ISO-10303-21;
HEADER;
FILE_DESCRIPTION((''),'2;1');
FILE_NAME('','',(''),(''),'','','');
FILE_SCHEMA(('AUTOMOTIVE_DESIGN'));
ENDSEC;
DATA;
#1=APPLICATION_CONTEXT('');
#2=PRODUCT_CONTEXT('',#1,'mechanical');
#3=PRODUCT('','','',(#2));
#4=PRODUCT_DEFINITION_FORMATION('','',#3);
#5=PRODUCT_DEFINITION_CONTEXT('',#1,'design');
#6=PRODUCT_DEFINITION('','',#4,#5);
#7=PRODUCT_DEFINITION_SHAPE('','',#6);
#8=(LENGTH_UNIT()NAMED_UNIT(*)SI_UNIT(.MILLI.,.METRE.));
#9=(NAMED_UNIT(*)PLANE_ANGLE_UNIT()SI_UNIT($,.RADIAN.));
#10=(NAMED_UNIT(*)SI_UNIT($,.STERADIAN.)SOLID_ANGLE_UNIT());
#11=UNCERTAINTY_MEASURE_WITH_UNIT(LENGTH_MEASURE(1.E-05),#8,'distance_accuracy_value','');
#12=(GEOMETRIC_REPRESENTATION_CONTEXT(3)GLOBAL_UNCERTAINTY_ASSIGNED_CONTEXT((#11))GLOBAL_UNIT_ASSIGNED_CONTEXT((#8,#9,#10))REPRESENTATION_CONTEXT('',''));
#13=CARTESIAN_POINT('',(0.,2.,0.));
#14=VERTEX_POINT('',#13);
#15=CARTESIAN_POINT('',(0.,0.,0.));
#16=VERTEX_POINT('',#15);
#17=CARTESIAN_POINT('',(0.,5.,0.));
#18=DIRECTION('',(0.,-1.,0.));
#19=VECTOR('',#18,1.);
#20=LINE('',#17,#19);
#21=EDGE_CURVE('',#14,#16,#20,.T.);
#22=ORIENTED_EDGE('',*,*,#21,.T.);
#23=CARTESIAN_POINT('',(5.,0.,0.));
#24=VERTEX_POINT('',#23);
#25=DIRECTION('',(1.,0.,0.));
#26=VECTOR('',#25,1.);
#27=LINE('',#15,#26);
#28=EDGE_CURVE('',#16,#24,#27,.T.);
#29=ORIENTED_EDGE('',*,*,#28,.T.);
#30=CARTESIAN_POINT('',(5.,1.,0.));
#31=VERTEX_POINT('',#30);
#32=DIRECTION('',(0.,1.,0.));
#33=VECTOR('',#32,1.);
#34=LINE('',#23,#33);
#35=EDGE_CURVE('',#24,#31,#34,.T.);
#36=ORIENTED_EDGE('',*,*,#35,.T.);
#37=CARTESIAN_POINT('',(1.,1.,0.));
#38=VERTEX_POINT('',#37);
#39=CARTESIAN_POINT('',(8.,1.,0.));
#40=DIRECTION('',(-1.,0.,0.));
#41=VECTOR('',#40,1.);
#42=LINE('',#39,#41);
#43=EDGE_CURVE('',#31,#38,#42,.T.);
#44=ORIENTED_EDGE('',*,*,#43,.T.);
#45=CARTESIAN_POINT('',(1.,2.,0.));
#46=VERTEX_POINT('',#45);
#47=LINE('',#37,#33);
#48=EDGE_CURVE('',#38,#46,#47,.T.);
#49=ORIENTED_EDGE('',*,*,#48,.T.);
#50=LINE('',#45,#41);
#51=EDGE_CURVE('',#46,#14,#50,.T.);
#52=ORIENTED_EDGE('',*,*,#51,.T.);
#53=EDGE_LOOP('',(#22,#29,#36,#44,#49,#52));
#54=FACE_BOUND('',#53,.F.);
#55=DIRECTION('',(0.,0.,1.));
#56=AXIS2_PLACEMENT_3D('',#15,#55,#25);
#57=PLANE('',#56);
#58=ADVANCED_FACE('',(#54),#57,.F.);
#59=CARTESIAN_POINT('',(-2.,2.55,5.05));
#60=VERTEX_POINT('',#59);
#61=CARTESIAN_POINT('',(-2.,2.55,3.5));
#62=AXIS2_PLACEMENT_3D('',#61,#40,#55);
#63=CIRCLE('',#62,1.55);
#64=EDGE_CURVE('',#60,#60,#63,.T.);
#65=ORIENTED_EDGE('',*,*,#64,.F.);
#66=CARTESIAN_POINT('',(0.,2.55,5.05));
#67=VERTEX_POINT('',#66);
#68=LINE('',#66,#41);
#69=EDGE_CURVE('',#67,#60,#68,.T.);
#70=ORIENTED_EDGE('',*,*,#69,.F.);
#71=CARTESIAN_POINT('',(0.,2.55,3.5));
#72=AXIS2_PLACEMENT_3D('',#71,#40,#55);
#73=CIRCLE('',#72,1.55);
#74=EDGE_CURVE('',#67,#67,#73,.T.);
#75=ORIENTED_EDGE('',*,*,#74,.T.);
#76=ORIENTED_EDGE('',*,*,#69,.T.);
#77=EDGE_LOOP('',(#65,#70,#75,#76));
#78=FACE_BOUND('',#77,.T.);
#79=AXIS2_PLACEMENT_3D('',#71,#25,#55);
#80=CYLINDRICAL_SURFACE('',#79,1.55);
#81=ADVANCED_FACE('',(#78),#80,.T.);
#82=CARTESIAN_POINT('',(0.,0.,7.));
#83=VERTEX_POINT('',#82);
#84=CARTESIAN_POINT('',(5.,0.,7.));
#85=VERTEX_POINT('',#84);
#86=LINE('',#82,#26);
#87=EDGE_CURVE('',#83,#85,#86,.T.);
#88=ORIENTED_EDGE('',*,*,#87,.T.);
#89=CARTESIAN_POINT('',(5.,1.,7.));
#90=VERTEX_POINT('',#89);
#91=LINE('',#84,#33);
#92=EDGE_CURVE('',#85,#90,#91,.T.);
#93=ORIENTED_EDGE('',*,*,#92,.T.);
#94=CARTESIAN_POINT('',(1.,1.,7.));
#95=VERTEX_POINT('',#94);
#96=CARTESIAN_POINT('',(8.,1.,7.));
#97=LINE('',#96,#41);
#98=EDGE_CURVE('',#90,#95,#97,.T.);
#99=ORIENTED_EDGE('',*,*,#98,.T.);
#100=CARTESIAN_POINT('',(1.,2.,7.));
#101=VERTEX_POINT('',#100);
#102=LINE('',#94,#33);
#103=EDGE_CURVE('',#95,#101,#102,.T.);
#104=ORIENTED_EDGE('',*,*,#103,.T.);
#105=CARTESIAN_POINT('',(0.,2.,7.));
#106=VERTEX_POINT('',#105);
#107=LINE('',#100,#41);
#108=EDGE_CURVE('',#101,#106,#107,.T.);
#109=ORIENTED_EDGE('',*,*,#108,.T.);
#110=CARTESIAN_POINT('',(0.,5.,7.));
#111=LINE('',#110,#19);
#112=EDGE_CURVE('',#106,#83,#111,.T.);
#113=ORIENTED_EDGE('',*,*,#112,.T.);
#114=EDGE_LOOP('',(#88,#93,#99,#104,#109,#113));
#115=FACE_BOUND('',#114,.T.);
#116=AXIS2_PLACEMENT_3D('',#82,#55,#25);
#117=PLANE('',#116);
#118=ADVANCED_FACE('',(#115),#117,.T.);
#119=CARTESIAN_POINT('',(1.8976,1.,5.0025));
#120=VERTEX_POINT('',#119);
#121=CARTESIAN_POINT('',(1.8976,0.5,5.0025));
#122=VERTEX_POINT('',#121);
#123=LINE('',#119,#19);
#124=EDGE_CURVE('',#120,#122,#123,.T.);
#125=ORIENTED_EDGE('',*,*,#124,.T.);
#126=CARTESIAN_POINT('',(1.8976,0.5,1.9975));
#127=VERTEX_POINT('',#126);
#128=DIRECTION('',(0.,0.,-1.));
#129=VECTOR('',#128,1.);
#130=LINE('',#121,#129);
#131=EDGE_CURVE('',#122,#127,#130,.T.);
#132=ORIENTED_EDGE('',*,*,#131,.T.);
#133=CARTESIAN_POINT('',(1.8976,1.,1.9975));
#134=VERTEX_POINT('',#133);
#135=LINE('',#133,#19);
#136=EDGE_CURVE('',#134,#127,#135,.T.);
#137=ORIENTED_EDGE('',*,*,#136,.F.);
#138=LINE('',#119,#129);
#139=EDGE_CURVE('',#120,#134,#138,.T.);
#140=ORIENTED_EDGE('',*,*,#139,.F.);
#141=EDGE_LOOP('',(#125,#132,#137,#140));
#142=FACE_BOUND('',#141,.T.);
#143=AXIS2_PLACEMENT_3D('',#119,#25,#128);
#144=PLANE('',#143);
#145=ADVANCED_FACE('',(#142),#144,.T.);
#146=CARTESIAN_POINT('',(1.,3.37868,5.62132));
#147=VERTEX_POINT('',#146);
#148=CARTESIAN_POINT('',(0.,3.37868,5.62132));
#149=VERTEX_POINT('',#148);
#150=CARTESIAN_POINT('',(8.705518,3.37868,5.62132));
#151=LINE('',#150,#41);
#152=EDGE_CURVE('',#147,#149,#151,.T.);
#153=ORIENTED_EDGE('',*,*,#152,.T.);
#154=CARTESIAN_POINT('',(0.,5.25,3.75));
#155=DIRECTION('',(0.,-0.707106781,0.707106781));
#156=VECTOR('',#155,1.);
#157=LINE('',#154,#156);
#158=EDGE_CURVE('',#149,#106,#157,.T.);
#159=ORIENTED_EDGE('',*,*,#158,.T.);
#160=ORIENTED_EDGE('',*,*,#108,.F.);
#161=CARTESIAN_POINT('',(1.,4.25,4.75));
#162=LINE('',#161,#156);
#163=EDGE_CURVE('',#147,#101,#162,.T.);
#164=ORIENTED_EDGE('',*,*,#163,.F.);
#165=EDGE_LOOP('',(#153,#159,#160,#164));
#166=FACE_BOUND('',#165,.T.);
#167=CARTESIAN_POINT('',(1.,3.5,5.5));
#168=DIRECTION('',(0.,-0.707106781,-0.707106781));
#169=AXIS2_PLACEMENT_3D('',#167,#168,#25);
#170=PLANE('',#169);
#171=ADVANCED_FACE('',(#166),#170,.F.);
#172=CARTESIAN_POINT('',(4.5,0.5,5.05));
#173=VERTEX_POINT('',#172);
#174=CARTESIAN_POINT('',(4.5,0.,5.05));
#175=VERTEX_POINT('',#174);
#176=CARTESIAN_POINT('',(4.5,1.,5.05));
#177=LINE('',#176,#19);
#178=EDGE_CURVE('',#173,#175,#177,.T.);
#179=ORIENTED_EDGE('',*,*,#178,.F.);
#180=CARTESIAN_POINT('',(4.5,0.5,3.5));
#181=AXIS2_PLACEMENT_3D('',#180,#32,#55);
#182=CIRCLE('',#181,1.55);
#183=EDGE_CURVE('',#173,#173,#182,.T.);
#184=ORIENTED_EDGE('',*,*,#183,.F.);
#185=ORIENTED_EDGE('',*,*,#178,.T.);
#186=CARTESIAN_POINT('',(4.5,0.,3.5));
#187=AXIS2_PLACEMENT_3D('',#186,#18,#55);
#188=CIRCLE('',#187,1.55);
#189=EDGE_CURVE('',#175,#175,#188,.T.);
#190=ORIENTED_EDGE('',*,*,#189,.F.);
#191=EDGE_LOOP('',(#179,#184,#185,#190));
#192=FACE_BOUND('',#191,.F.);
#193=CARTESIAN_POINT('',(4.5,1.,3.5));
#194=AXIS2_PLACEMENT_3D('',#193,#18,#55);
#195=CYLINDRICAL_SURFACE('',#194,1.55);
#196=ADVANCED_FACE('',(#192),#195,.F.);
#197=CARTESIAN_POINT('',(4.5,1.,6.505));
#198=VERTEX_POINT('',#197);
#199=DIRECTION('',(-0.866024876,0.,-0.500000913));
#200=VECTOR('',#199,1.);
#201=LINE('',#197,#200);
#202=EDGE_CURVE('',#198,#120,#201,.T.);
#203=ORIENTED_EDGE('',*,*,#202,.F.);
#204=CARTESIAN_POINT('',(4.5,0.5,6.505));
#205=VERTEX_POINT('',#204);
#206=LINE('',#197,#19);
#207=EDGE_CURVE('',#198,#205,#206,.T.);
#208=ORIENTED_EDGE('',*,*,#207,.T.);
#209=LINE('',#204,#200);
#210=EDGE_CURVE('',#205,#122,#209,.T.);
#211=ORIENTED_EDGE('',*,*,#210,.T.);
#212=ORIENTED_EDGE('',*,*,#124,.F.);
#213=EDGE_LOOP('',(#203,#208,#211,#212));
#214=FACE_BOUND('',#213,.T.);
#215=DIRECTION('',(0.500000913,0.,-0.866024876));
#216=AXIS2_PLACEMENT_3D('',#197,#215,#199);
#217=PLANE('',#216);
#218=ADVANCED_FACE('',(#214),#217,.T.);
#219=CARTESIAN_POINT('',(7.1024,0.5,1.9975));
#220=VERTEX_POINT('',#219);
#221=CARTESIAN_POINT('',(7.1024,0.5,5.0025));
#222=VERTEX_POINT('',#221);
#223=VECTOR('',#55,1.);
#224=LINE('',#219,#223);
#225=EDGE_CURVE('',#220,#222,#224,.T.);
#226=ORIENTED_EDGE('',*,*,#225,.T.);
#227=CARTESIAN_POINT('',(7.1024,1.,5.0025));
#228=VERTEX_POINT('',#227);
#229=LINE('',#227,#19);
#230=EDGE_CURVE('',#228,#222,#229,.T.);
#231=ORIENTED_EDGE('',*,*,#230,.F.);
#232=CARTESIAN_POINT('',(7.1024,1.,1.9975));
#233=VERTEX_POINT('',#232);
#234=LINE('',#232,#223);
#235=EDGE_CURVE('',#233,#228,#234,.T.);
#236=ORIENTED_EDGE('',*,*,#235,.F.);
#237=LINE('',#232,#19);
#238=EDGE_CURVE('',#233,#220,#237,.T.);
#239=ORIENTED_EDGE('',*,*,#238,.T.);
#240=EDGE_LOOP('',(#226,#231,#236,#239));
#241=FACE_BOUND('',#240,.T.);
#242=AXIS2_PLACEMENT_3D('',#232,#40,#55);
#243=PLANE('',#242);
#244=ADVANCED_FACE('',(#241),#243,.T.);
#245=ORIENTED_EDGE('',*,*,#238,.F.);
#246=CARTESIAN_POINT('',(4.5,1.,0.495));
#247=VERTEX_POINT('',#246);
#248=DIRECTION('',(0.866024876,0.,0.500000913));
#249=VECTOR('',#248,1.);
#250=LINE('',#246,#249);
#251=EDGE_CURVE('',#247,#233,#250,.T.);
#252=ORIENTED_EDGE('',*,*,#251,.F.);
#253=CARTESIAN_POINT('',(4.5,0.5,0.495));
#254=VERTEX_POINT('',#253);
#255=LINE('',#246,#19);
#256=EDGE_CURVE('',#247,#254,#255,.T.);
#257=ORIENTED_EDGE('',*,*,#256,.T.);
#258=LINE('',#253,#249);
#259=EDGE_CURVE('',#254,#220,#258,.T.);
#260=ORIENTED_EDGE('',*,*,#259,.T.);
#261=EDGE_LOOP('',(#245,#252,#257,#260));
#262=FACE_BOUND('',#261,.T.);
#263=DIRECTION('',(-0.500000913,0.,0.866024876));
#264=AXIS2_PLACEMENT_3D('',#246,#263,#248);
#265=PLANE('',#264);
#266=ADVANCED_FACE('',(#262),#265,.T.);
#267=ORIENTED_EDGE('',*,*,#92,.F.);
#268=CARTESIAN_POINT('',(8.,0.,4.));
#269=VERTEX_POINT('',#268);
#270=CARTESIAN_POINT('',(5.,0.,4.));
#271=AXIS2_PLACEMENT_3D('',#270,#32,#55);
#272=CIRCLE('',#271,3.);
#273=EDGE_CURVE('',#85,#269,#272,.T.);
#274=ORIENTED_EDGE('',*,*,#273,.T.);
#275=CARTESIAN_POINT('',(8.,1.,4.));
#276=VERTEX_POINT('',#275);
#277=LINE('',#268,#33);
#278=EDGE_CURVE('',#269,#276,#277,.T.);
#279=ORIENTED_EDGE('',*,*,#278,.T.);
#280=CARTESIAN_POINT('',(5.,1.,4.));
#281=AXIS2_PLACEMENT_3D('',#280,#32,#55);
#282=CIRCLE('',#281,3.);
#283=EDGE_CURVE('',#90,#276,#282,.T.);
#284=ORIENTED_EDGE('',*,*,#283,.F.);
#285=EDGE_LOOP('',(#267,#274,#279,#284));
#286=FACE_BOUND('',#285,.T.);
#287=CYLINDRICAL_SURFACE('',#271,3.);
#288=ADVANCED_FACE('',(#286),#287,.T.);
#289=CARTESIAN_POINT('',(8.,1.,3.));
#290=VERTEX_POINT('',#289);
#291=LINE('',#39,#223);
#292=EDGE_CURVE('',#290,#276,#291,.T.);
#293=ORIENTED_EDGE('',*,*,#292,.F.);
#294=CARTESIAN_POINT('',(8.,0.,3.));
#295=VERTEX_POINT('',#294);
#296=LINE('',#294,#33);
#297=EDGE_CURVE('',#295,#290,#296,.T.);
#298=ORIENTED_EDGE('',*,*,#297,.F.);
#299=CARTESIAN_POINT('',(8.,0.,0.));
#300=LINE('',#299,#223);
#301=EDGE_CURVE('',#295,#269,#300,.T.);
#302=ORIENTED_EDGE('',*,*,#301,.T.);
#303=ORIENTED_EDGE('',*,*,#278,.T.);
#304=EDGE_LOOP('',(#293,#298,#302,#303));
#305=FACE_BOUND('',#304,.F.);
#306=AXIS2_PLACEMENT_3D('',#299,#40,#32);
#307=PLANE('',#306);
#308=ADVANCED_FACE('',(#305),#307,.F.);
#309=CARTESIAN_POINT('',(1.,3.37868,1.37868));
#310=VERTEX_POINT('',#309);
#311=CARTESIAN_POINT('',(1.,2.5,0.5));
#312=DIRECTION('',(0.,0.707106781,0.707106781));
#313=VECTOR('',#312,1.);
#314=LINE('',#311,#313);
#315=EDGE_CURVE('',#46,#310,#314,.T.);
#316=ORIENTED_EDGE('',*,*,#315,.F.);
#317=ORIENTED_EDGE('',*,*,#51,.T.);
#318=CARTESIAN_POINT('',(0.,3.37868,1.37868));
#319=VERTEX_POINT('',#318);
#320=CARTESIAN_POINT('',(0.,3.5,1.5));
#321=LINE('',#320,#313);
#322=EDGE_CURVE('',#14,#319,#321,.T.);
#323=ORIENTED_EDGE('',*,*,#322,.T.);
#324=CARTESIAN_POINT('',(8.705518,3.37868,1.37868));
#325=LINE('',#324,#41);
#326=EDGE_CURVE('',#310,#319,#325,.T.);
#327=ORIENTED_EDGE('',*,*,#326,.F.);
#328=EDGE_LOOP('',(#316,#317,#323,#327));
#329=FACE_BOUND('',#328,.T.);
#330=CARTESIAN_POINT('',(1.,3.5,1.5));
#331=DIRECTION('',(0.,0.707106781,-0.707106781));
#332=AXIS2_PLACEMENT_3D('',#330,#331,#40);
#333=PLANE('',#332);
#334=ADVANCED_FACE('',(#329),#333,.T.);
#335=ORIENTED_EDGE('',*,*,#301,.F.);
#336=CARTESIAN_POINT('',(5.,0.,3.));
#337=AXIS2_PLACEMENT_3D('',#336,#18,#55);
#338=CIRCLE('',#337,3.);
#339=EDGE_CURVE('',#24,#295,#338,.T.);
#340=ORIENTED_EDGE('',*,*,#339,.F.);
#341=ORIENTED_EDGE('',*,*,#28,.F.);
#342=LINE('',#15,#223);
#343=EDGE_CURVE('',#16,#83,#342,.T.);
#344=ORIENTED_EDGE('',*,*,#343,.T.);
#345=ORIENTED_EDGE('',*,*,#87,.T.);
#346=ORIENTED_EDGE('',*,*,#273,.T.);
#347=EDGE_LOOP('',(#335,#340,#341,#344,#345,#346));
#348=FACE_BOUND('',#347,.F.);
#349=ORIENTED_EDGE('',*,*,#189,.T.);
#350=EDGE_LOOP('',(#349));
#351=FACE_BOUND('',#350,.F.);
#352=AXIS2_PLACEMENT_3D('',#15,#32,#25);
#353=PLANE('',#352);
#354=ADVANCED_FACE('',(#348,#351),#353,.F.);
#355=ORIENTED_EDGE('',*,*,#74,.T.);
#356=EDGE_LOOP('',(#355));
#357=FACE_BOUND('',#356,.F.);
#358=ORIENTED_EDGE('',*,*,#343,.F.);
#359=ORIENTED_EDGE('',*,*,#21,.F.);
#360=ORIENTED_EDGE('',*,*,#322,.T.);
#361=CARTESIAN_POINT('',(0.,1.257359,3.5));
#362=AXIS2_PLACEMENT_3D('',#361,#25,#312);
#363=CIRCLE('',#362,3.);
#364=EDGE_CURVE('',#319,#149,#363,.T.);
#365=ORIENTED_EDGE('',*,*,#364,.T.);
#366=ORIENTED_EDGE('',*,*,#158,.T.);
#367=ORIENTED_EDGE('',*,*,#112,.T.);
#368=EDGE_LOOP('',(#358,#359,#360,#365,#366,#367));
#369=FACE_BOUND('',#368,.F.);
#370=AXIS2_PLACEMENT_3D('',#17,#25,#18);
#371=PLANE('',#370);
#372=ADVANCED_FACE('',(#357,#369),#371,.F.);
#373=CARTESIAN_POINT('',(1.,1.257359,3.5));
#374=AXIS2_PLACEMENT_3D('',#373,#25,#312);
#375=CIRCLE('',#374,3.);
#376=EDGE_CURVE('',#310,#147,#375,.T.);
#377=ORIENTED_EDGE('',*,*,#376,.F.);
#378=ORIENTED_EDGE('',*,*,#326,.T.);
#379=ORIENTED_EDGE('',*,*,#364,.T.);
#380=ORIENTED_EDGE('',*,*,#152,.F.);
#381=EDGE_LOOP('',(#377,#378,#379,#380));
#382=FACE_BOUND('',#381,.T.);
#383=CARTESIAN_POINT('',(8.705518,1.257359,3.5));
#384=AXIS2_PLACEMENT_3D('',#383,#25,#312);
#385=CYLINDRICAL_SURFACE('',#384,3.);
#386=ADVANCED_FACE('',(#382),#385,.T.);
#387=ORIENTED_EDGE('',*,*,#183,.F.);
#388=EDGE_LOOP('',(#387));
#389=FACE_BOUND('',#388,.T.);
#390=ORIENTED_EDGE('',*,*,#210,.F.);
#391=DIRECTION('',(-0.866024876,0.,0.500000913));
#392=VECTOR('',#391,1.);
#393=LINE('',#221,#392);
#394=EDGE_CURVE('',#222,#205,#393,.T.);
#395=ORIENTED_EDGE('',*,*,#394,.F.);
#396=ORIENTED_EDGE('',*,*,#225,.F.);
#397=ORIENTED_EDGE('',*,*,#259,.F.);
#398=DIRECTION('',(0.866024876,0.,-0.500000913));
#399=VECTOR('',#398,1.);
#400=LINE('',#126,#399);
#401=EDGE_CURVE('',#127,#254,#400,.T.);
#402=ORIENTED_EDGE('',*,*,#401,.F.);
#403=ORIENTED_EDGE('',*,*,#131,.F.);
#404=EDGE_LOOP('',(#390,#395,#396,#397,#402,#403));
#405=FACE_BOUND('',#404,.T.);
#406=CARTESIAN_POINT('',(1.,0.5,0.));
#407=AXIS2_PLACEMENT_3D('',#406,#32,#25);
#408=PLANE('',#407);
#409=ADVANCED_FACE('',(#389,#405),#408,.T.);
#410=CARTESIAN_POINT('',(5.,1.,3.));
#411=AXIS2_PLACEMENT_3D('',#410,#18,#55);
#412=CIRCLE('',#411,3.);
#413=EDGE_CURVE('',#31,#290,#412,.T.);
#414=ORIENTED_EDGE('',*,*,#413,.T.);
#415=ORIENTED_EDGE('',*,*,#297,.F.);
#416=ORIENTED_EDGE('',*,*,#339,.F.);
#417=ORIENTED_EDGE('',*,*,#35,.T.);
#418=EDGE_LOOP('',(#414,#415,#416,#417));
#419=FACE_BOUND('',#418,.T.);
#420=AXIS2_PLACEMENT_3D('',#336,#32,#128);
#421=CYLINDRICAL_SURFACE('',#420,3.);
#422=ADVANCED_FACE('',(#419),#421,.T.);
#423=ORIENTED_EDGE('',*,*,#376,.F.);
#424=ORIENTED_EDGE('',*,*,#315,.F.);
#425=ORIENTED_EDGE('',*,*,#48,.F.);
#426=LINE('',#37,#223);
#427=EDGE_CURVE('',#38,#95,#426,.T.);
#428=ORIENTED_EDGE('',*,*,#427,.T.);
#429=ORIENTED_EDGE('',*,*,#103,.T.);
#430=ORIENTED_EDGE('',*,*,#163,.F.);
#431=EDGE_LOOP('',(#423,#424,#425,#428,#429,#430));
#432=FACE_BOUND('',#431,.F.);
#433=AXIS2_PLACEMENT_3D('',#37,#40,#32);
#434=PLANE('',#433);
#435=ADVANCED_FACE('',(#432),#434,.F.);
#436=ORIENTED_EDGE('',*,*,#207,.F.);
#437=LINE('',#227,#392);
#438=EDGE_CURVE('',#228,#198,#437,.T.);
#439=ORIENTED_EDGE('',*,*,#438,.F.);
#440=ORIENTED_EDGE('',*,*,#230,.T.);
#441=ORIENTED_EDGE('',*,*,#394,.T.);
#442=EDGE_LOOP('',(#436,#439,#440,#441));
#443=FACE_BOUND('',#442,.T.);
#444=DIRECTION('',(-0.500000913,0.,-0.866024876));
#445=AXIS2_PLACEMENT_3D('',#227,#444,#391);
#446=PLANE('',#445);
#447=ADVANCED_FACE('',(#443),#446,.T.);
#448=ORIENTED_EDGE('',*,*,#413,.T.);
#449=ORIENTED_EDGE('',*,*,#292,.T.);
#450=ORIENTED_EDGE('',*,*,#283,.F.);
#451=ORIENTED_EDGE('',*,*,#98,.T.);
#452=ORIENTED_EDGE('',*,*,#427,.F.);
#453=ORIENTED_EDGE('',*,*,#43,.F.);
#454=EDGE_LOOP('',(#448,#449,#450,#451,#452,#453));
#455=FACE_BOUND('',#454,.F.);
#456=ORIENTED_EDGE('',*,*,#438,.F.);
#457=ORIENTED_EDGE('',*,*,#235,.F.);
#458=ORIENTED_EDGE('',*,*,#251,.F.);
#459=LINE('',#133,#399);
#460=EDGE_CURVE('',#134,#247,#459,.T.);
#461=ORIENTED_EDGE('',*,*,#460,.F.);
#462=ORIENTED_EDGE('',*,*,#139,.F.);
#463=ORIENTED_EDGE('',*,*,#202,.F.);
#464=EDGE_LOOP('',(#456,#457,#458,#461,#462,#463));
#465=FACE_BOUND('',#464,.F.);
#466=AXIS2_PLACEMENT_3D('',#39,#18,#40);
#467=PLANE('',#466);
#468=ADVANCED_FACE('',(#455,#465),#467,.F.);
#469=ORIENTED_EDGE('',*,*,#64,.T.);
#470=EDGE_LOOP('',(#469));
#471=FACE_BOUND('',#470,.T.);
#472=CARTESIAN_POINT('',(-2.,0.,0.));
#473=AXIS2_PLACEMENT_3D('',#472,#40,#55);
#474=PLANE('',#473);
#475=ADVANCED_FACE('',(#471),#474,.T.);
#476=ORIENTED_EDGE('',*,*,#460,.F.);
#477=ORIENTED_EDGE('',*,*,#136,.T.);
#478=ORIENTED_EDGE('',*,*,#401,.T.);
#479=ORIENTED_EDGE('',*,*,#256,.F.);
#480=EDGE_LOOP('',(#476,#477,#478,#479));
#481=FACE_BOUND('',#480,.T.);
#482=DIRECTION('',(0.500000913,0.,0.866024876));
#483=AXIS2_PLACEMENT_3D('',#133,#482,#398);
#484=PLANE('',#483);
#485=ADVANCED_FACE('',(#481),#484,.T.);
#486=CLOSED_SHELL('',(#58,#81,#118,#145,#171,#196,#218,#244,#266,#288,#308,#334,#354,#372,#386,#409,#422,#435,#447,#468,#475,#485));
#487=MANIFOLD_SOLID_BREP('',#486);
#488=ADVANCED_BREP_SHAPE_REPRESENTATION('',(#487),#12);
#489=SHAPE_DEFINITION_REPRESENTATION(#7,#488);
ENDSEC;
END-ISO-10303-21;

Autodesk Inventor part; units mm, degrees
ref_plane "YZ Plane" through (0, 0, 0) normal (1, 0, 0) x (0, 1, 0)
ref_plane "XZ Plane" through (0, 0, 0) normal (0, 1, 0) x (-1, 0, 0)
ref_plane "XY Plane" through (0, 0, 0) normal (0, 0, 1) x (1, 0, 0)
sketch "Sketch1" plane through (0, 0, 0) normal (0, 0, 1) x (1, 0, 0)
  line L0 (0, 0) -> (8, 0)
  line L1 (8, 0) -> (8, 1)
  line L2 (8, 1) -> (1, 1)
  line L3 (1, 1) -> (1, 5)
  line L4 (1, 5) -> (0, 5)
  line L5 (0, 5) -> (0, 0)
  dimension "d0" = 8
  dimension "d1" = 5
  dimension "d2" = 1
  dimension "d8" = 1
extrude "Extrusion1" add sketch "Sketch1" along normal blind 7
sketch "Sketch2" plane through (0, 0, 0) normal (-1, 0, 0) x (0, 0, 1)
  circle A0 centre (3.5, 2.55) radius 1.55
  line L0 (0, 0) -> (7, 0) projected
  line L1 (7, 5) -> (7, 0) projected
  dimension "d5" = 3.1
  dimension "d6" = 2.55
  dimension "d7" = 3.5
extrude "Extrusion2" add sketch "Sketch2" along normal blind 2
sketch "Sketch3" plane through (1, 1, 0) normal (0, 1, 0) x (1, 0, 0)
  line L0 (7, 0) -> (7, -7) projected
  line L1 (7, -7) -> (0, -7) projected
  point P0 (-1, 0)
  point P1 (3.5, -3.5)
  point P2 (3.5, -7)
  dimension "d11" = 3.5
  dimension "d12" = 3.5
hole "Hole1" at (4.5, 1, 3.5) direction (0, -1, 0) diameter 3.1 end through all
sketch "Sketch4" plane through (1, 1, 0) normal (0, 1, 0) x (1, 0, 0)
  line L0 (3.5, -0.495) -> (6.1024, -1.9975)
  line L1 (6.1024, -1.9975) -> (6.1024, -5.0025)
  line L2 (6.1024, -5.0025) -> (3.5, -6.505)
  line L3 (3.5, -6.505) -> (0.8976, -5.0025)
  line L4 (0.8976, -5.0025) -> (0.8976, -1.9975)
  line L5 (0.8976, -1.9975) -> (3.5, -0.495)
  circle A0 centre (3.5, -3.5) radius 1.55 projected
  point P0 (-1, 0)
  dimension "d20" = 6.01
fillet "Fillet1" radius 3 2 edges at (8, 0.5, 0) (8, 0.5, 7)
extrude "Extrusion3" cut sketch "Sketch4" against normal blind 0.5
chamfer "Chamfer1" distance 3 angle 45 2 edges at (0.5, 5, 7) (0.5, 5, 0)
fillet "Fillet2" radius 3 2 edges at (0.5, 5, 4) (0.5, 5, 3)
properties part number "mocowanie_tofa_CPY1"
